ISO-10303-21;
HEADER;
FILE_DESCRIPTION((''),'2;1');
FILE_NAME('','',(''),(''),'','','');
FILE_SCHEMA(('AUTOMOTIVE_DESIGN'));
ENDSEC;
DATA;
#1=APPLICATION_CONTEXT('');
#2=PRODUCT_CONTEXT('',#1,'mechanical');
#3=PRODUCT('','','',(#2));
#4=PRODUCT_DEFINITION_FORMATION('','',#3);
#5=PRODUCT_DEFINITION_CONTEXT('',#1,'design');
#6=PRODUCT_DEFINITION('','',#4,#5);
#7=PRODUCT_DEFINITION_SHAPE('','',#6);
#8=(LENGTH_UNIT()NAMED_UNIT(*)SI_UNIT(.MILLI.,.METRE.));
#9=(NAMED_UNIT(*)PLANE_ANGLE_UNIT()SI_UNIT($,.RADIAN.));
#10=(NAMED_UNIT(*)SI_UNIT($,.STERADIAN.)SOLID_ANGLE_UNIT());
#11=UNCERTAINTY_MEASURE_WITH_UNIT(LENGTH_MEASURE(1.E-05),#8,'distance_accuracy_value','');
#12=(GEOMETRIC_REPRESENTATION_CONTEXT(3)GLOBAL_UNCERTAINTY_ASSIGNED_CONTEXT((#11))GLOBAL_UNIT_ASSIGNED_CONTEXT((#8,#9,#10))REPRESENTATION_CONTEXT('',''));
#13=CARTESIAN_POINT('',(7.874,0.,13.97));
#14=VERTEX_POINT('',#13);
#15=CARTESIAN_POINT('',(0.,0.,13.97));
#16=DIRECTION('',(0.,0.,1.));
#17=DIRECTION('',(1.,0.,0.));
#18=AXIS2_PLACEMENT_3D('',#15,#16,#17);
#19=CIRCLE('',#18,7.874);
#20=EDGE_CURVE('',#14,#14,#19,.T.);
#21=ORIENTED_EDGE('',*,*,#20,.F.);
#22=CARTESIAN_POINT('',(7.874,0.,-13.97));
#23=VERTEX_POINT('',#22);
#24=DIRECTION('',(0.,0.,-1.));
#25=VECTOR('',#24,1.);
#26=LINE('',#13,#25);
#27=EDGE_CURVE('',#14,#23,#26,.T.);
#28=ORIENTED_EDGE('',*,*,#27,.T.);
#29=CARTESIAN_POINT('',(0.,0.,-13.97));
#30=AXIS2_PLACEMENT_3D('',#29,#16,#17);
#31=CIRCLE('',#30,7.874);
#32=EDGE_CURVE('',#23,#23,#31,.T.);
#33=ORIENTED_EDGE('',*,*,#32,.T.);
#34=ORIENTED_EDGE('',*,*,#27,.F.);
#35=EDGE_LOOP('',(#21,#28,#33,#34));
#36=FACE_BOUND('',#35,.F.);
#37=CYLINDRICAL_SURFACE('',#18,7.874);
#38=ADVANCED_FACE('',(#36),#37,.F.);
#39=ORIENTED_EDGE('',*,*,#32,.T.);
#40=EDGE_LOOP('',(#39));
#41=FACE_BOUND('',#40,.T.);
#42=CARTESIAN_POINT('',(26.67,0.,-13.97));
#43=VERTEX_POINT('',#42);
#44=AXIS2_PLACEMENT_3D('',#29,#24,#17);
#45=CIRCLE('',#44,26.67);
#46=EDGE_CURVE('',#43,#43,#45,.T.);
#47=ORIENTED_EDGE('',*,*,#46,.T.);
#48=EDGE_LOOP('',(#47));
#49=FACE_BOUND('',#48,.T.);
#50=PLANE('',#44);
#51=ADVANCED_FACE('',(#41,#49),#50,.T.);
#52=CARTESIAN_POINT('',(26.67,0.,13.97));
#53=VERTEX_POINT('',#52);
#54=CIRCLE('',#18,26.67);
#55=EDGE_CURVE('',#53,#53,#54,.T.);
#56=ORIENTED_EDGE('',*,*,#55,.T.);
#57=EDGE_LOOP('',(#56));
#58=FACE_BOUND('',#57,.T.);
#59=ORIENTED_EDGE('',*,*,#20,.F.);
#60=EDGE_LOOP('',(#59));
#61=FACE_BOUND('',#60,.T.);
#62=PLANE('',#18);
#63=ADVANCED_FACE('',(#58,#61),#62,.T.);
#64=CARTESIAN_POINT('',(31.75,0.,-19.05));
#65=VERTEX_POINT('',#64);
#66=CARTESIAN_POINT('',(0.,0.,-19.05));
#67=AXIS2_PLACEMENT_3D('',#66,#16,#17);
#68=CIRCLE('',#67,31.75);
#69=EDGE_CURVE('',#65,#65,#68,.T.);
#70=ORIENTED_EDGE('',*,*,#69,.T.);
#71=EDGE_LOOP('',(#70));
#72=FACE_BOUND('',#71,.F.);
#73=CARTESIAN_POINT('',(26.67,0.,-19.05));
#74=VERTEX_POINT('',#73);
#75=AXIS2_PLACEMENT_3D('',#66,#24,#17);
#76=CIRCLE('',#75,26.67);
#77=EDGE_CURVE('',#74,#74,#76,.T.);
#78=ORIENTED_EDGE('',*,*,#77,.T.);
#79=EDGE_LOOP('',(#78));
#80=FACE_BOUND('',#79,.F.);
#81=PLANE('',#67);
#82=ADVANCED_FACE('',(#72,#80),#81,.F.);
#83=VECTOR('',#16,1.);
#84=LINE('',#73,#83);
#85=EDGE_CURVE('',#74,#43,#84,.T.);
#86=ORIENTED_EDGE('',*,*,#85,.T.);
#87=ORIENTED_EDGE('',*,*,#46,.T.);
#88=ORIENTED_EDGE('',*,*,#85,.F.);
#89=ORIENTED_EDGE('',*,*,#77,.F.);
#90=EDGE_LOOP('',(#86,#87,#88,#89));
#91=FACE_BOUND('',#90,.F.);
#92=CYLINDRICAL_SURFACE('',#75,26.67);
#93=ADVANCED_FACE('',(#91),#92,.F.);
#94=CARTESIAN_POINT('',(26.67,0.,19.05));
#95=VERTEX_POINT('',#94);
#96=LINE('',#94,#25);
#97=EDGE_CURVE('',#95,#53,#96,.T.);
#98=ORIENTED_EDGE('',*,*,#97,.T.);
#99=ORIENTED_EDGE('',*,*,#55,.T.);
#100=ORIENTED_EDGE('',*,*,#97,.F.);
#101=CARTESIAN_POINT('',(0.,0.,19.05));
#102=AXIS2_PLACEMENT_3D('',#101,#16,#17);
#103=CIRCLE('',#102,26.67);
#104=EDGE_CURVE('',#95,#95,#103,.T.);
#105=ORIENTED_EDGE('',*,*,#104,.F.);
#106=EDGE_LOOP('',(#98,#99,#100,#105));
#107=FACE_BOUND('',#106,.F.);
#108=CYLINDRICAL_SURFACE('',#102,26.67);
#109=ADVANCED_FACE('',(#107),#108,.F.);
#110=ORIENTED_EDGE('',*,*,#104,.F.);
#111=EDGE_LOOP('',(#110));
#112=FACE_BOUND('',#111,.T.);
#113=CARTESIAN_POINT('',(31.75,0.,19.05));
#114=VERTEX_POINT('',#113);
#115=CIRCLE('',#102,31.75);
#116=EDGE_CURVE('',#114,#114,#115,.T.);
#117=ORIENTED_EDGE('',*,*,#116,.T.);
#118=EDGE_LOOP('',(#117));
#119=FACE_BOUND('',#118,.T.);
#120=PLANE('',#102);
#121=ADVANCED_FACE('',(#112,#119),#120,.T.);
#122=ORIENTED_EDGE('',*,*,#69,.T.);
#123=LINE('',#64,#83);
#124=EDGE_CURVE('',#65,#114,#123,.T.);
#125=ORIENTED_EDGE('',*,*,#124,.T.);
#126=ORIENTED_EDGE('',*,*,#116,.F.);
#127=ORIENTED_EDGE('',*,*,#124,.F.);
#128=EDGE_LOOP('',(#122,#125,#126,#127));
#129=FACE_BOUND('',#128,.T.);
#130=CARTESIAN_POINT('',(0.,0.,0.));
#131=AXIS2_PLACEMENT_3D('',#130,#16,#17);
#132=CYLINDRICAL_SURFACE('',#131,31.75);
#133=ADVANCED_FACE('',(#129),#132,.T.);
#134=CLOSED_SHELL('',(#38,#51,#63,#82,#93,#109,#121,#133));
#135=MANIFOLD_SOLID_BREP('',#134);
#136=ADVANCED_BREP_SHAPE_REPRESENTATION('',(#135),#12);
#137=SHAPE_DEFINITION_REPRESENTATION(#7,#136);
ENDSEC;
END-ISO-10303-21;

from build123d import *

# Parameters (mm, degrees)
F0_R     = 31.75
F1_DEPTH = 19.05
F2_R     = 26.67
F4_DEPTH = 5.08
F3_R     = 26.67
F5_DEPTH = 5.08
F6_R     = 7.874
F7_DEPTH = 50.8


with BuildPart() as f1:
    # F0 (on Top) → F1 (new body, symmetric)
    with BuildSketch(Plane.XY):
        Circle(F0_R)
    extrude(amount=F1_DEPTH, both=True)

    # F2 (on face) → F4 (cut)
    with BuildSketch(Plane.XY.offset(19.05)):
        Circle(F2_R)
    extrude(amount=-F4_DEPTH, mode=Mode.SUBTRACT)

    # F3 (on face) → F5 (cut)
    with BuildSketch(Plane(origin=(0, 0, -19.05), x_dir=(1, 0, 0), z_dir=(0, 0, -1))):
        Circle(F3_R)
    extrude(amount=-F5_DEPTH, mode=Mode.SUBTRACT)

    # F6 (on face) → F7 (cut)
    with BuildSketch(Plane.XY.offset(13.97)):
        Circle(F6_R)
    extrude(amount=-F7_DEPTH, mode=Mode.SUBTRACT)


solid = f1.part
